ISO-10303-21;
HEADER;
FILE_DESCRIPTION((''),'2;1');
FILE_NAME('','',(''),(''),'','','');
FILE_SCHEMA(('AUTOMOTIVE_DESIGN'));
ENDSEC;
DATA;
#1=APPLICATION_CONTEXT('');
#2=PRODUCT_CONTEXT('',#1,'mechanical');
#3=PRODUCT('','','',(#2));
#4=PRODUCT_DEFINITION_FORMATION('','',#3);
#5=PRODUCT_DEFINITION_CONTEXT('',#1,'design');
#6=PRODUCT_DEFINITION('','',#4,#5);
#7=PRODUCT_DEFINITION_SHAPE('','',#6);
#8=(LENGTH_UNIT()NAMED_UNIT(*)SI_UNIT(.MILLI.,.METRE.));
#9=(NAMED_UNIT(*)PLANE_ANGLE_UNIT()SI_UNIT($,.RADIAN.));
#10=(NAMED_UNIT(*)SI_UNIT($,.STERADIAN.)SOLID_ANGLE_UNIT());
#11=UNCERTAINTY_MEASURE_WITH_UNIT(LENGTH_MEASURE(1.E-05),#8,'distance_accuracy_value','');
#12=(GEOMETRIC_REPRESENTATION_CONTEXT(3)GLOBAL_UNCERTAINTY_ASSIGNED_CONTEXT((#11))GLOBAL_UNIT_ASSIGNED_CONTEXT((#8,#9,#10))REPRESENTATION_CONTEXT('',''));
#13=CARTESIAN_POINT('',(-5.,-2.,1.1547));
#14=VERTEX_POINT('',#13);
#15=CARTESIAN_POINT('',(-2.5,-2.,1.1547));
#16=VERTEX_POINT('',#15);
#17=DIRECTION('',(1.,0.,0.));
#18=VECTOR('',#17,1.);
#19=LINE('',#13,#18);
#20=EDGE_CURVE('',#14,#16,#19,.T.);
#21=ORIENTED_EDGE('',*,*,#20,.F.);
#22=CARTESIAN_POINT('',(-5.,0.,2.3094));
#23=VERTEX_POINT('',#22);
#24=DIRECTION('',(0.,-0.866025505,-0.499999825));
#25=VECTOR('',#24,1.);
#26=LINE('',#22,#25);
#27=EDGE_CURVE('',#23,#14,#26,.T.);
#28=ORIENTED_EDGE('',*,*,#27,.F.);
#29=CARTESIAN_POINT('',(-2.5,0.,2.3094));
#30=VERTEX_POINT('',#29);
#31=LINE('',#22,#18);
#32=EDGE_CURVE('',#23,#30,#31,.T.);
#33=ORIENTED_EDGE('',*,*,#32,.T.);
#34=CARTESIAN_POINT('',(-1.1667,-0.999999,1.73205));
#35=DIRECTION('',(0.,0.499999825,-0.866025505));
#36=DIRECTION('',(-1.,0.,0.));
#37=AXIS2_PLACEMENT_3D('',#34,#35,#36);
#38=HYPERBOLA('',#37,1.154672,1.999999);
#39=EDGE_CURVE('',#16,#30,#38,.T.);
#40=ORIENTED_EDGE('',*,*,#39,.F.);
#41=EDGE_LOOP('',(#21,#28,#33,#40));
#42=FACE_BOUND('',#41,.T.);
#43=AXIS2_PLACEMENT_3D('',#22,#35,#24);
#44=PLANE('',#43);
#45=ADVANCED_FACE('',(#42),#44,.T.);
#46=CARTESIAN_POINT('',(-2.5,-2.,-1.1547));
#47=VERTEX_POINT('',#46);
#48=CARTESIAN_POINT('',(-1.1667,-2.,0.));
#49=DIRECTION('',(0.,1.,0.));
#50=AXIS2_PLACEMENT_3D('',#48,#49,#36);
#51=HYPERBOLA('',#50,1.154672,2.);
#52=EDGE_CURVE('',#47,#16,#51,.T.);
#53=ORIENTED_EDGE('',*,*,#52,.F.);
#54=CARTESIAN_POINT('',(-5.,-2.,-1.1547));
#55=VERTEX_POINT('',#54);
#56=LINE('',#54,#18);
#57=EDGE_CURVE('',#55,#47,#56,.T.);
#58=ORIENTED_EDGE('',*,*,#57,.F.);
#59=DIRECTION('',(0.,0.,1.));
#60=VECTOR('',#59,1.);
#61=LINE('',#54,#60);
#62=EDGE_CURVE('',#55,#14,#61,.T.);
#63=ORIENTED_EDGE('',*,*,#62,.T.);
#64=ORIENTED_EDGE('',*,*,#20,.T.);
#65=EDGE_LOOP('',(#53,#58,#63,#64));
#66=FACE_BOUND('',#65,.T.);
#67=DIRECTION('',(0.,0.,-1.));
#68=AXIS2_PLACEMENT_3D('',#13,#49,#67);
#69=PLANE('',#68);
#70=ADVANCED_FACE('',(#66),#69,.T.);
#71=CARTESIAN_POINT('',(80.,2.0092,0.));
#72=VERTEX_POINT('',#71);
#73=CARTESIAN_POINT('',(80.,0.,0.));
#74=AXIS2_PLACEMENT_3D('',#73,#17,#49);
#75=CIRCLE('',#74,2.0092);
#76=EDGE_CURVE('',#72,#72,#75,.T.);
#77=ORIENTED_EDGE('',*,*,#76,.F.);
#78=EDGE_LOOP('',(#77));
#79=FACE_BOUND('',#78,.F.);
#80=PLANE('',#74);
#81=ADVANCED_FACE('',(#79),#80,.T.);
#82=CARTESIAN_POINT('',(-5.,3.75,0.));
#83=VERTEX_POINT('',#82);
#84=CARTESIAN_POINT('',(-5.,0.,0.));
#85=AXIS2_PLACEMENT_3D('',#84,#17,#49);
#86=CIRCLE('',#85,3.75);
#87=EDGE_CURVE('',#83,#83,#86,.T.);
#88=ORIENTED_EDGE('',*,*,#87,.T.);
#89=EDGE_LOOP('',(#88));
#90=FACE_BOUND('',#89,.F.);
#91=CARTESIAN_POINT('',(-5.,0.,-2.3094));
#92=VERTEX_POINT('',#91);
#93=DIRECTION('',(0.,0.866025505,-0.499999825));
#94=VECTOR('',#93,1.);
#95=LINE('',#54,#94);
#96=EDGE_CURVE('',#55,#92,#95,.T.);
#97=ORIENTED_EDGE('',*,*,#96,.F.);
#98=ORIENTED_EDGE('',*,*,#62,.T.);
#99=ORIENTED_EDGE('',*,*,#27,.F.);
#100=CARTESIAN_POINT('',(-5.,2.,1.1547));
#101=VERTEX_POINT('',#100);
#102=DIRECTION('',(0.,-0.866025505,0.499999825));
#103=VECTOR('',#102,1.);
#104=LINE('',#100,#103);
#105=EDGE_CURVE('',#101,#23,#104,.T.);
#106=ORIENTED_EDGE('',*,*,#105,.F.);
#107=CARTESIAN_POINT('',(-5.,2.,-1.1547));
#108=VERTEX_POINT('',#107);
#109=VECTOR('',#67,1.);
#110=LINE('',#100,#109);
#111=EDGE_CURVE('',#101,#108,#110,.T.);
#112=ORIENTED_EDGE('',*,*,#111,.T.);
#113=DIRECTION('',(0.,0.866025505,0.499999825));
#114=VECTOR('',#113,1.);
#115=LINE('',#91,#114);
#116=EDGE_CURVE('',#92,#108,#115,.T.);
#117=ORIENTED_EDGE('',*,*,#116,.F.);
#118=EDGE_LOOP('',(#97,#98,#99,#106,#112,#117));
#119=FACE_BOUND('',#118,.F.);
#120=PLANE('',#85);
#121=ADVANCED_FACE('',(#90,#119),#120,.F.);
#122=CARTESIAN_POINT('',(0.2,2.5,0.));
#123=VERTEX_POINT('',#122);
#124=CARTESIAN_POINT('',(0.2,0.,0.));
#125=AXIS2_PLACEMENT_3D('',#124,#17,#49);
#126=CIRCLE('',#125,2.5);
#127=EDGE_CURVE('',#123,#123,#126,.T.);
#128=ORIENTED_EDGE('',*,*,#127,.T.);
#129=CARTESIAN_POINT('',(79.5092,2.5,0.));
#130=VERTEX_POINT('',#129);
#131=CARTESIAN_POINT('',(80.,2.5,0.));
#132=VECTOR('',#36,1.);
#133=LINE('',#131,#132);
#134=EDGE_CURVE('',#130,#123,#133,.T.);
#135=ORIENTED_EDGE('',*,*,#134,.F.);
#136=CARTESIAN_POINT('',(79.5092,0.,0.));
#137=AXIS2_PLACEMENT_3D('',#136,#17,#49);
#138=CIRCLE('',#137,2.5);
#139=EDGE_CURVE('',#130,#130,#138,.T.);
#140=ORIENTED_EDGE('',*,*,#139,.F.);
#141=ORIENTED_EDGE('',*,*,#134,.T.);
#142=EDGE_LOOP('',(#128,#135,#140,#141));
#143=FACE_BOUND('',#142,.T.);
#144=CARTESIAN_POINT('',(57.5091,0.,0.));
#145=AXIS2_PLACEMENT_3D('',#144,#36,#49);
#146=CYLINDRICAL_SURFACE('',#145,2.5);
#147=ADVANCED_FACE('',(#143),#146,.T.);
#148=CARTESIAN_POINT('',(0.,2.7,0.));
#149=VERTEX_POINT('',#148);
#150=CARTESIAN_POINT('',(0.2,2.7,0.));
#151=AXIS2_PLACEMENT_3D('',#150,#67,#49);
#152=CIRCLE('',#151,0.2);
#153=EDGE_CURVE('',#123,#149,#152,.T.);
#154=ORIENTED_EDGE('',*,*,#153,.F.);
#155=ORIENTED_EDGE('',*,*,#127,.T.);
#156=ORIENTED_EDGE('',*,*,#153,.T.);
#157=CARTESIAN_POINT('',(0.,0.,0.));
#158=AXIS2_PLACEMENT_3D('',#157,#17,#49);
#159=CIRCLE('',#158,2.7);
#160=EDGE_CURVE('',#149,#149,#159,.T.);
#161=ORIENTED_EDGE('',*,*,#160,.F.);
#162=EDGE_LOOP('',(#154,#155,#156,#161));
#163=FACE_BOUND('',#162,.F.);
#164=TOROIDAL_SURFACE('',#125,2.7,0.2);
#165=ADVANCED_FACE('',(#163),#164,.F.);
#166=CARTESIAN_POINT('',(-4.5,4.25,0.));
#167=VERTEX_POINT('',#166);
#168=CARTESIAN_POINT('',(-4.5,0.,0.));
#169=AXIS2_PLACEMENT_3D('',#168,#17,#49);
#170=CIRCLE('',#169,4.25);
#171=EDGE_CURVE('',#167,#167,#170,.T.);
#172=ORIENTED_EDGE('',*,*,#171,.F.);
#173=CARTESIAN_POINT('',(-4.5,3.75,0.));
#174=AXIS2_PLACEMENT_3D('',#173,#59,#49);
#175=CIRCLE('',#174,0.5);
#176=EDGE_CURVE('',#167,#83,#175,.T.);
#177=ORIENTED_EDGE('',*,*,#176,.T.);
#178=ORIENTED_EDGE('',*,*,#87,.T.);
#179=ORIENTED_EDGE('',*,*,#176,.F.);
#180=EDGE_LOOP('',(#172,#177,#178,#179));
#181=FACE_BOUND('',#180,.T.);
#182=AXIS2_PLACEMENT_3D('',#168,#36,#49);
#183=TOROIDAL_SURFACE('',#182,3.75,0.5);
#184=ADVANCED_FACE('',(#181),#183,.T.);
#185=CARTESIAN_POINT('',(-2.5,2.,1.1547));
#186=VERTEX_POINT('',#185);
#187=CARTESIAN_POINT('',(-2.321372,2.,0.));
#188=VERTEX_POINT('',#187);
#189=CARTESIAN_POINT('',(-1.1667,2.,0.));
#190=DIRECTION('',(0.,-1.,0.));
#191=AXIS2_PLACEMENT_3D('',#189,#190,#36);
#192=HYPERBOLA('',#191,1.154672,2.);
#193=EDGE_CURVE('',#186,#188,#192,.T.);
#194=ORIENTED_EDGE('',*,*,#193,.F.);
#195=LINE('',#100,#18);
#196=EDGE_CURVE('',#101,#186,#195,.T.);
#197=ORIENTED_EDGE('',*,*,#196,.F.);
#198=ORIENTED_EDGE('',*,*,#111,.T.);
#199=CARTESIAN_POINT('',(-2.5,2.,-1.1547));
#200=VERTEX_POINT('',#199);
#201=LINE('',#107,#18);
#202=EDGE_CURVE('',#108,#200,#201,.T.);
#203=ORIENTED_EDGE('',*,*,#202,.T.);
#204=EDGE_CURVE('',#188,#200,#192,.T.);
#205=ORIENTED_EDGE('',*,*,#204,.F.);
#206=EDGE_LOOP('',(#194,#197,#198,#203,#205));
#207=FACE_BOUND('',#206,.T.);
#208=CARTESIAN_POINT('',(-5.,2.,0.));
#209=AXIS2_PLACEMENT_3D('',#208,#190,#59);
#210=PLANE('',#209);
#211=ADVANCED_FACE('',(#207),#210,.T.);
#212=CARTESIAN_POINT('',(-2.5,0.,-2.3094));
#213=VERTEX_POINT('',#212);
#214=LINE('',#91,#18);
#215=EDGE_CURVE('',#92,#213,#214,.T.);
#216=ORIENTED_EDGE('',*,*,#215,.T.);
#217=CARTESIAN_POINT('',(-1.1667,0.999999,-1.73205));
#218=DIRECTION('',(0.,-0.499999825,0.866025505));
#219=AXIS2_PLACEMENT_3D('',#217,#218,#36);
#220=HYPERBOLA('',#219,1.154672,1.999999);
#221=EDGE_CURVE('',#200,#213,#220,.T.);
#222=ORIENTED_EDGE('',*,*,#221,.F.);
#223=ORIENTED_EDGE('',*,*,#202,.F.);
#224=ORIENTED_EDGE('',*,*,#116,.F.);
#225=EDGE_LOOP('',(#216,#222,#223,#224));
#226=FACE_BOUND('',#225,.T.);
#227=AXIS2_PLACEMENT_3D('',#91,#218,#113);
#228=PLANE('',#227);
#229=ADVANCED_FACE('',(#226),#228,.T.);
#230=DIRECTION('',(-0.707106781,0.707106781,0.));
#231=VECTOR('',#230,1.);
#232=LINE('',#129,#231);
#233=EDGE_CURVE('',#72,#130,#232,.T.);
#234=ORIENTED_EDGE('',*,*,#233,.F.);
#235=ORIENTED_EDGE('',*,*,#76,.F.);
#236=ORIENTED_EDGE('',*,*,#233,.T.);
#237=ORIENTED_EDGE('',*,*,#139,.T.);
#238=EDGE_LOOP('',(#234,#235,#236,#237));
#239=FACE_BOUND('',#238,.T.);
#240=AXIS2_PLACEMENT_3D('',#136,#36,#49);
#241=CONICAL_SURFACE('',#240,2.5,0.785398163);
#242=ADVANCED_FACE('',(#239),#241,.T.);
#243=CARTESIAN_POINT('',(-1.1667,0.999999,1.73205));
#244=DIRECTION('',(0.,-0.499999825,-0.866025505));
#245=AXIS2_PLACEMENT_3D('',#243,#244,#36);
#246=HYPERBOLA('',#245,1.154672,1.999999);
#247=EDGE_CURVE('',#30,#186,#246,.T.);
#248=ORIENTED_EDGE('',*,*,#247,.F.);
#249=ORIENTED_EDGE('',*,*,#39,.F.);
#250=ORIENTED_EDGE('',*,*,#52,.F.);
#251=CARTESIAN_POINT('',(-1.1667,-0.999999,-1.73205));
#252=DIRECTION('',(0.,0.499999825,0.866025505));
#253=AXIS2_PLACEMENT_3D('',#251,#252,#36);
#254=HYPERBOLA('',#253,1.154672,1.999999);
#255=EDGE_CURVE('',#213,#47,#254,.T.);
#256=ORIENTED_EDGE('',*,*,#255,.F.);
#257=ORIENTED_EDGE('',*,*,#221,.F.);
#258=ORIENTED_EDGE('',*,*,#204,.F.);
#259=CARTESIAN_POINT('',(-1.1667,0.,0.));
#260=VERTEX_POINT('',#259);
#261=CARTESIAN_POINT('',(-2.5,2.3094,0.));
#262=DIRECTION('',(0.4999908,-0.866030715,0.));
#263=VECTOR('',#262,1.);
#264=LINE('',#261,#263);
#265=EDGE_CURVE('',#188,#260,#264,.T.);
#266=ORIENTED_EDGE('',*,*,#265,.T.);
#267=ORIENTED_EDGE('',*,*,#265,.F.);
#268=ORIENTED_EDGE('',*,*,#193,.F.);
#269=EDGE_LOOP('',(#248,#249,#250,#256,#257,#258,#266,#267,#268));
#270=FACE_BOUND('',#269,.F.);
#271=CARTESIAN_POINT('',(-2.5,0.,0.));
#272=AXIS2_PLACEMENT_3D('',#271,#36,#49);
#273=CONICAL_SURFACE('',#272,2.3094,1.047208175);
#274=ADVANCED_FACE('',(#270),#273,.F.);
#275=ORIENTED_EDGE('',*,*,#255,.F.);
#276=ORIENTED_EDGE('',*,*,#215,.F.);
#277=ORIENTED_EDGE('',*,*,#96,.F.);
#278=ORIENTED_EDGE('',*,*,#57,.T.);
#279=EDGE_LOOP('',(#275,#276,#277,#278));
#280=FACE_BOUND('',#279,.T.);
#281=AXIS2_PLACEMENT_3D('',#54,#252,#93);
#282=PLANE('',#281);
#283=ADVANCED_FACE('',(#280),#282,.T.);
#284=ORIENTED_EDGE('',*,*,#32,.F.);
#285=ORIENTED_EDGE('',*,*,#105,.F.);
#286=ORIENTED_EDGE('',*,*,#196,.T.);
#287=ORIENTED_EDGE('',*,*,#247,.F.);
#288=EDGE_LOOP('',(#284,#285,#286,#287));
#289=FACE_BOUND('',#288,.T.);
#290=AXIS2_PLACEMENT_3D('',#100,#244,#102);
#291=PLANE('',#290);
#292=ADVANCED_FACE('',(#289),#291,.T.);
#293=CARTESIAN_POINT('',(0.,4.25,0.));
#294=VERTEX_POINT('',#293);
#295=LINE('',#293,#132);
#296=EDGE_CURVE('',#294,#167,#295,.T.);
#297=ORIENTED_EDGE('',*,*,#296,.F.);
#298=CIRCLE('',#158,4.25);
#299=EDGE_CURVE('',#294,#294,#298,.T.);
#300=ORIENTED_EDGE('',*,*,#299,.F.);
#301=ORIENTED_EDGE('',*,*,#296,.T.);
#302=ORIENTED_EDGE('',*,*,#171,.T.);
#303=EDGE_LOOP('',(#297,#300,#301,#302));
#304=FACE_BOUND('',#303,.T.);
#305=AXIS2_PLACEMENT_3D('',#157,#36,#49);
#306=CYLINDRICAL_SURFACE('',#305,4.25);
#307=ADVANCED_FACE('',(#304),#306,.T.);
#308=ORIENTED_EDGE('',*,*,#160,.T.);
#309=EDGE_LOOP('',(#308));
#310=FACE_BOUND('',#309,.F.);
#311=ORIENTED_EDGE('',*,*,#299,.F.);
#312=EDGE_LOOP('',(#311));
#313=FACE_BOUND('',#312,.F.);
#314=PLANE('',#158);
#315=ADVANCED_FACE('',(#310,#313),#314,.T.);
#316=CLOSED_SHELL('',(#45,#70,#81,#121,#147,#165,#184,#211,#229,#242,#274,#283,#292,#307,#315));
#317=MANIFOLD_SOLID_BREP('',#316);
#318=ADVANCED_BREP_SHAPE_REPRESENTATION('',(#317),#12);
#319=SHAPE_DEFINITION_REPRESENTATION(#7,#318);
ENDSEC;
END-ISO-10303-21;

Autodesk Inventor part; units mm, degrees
ref_plane "YZ Plane" through (0, 0, 0) normal (1, 0, 0) x (0, 1, 0)
ref_plane "XZ Plane" through (0, 0, 0) normal (0, 1, 0) x (-1, 0, 0)
sketch "Sketch1" plane through (0, 0, 0) normal (0, 0, 1) x (1, 0, 0)
  line L0 (-1.1667, 0) -> (80, 0)
  line L1 (80, 0) -> (80, 2.5)
  line L2 (80, 2.5) -> (58, 2.5)
  line L3 (58, 2.5) -> (57.5091, 2.5)
  line L4 (57.5091, 2.5) -> (0, 2.5)
  line L5 (0, 2.5) -> (0, 4.25)
  line L6 (0, 4.25) -> (-5, 4.25)
  line L7 (-5, 4.25) -> (-5, 2.3094)
  line L8 (-5, 2.3094) -> (-2.5, 2.3094)
  line L9 (-2.5, 2.3094) -> (-1.1667, 0)
  line L10 (-16, 0) -> (61, 0) projected
  line L11 (0, -0.85) -> (0, 5.1) projected
  line L12 (58, 2.5) -> (0, 2.5) construction
  dimension "d1" = 22
  dimension "d2" = 0.4909
  dimension "d3" = 5
  dimension "d4" = 2.5
  dimension "d5" = 60
  dimension "d6" = 5
  dimension "d7" = 5
  dimension "d8" = 4.6188
  dimension "d9" = 8.5
  dimension "d26" = 80
revolve "Body" add sketch "Sketch1" angle 360 about axis through (-1.1667, 0, 0) along (1, 0, 0)
sketch "Sketch2" plane through (-5, 0, 0) normal (-1, 0, 0) x (0, 0, 1)
  circle A0 centre (0, 0) radius 2.3094 projected
  line L0 (0, -5.95) -> (0, 5.95) projected
  line L1 (-5.95, 0) -> (5.95, 0) projected
  line L2 (2.3094, 0) -> (1.1547, -2)
  line L3 (1.1547, -2) -> (-1.1547, -2)
  line L4 (-1.1547, -2) -> (-2.3094, 0)
  line L5 (-2.3094, 0) -> (-1.1547, 2)
  line L6 (-1.1547, 2) -> (1.1547, 2)
  line L7 (1.1547, 2) -> (2.3094, 0)
extrude "Slot" add sketch "Sketch2" against normal up to next contours L7 A0 | A0 L2 | L6 L0 A0 | A0 L0 L3 | L0 L6 A0 | A0 L3 L0 | L4 A0 | A0 L5
fillet "Fillet1" radius 0.5 1 edges at (-5, -4.25, 0)
thread "Thread" size "M5x0.8" class "6g" standard "ISO Metric profile" length 22
chamfer "Chamfer1" distance 0.4908 distance2 0.4908 1 edges at (80, -2.5, 0) measured on face at (80, 0.2278, 0.5045)
ref_plane "Work Plane1" through (29, 0, 0) normal (0, -1, 0) x (1, 0, 0)
fillet "Fillet2" radius 0.2 1 edges at (0, -2.5, 0)
equation "\"d30\" = R"
equation "\"d17\" = RR"
equation "\"d13\" = GEL"
equation "\"d15\" = -0.5 * SPD + 0.5 * GD"
equation "\"d16\" = GUL"
equation "\"d1\" = GEL"
equation "\"d3\" = KOH"
equation "\"d4\" = INTI"
equation "\"d6\" = GD"
equation "\"d7\" = BDM"
equation "\"d8\" = 1.1547 * SW"
equation "\"d9\" = KOD"
equation "\"d26\" = NLG"
equation "\"GD\" = NND"
equation "\"NLG\" = 80"
equation "\"GEL\" = 22"
equation "\"KOD\" = 8.5"
equation "\"KOH\" = 5"
equation "\"INTI\" = 2.5"
equation "\"GAL\" = 0.61345 * PTC"
equation "\"GUL\" = 0.61345 * PTC"
equation "\"BDM\" = NND"
equation "\"SW\" = 4"
equation "\"RR\" = 0.5"
equation "\"SPD\" = NND - 1.2269 * PTC"
equation "\"R\" = 0.2"
equation "\"TOA\" = 30deg"
equation "\"GD1\" = THREADDIA - 1.2269 * PTC"
equation "\"THREADDIA\" = 5"
equation "\"FAWI\" = 45deg"
equation "\"ANG\" = 120deg"
equation "\"PTC\" = 0.8"
equation "\"NND\" = 5"
equation "\"E0\" = 1.155 * SW"
properties material "Steel, Mild"
